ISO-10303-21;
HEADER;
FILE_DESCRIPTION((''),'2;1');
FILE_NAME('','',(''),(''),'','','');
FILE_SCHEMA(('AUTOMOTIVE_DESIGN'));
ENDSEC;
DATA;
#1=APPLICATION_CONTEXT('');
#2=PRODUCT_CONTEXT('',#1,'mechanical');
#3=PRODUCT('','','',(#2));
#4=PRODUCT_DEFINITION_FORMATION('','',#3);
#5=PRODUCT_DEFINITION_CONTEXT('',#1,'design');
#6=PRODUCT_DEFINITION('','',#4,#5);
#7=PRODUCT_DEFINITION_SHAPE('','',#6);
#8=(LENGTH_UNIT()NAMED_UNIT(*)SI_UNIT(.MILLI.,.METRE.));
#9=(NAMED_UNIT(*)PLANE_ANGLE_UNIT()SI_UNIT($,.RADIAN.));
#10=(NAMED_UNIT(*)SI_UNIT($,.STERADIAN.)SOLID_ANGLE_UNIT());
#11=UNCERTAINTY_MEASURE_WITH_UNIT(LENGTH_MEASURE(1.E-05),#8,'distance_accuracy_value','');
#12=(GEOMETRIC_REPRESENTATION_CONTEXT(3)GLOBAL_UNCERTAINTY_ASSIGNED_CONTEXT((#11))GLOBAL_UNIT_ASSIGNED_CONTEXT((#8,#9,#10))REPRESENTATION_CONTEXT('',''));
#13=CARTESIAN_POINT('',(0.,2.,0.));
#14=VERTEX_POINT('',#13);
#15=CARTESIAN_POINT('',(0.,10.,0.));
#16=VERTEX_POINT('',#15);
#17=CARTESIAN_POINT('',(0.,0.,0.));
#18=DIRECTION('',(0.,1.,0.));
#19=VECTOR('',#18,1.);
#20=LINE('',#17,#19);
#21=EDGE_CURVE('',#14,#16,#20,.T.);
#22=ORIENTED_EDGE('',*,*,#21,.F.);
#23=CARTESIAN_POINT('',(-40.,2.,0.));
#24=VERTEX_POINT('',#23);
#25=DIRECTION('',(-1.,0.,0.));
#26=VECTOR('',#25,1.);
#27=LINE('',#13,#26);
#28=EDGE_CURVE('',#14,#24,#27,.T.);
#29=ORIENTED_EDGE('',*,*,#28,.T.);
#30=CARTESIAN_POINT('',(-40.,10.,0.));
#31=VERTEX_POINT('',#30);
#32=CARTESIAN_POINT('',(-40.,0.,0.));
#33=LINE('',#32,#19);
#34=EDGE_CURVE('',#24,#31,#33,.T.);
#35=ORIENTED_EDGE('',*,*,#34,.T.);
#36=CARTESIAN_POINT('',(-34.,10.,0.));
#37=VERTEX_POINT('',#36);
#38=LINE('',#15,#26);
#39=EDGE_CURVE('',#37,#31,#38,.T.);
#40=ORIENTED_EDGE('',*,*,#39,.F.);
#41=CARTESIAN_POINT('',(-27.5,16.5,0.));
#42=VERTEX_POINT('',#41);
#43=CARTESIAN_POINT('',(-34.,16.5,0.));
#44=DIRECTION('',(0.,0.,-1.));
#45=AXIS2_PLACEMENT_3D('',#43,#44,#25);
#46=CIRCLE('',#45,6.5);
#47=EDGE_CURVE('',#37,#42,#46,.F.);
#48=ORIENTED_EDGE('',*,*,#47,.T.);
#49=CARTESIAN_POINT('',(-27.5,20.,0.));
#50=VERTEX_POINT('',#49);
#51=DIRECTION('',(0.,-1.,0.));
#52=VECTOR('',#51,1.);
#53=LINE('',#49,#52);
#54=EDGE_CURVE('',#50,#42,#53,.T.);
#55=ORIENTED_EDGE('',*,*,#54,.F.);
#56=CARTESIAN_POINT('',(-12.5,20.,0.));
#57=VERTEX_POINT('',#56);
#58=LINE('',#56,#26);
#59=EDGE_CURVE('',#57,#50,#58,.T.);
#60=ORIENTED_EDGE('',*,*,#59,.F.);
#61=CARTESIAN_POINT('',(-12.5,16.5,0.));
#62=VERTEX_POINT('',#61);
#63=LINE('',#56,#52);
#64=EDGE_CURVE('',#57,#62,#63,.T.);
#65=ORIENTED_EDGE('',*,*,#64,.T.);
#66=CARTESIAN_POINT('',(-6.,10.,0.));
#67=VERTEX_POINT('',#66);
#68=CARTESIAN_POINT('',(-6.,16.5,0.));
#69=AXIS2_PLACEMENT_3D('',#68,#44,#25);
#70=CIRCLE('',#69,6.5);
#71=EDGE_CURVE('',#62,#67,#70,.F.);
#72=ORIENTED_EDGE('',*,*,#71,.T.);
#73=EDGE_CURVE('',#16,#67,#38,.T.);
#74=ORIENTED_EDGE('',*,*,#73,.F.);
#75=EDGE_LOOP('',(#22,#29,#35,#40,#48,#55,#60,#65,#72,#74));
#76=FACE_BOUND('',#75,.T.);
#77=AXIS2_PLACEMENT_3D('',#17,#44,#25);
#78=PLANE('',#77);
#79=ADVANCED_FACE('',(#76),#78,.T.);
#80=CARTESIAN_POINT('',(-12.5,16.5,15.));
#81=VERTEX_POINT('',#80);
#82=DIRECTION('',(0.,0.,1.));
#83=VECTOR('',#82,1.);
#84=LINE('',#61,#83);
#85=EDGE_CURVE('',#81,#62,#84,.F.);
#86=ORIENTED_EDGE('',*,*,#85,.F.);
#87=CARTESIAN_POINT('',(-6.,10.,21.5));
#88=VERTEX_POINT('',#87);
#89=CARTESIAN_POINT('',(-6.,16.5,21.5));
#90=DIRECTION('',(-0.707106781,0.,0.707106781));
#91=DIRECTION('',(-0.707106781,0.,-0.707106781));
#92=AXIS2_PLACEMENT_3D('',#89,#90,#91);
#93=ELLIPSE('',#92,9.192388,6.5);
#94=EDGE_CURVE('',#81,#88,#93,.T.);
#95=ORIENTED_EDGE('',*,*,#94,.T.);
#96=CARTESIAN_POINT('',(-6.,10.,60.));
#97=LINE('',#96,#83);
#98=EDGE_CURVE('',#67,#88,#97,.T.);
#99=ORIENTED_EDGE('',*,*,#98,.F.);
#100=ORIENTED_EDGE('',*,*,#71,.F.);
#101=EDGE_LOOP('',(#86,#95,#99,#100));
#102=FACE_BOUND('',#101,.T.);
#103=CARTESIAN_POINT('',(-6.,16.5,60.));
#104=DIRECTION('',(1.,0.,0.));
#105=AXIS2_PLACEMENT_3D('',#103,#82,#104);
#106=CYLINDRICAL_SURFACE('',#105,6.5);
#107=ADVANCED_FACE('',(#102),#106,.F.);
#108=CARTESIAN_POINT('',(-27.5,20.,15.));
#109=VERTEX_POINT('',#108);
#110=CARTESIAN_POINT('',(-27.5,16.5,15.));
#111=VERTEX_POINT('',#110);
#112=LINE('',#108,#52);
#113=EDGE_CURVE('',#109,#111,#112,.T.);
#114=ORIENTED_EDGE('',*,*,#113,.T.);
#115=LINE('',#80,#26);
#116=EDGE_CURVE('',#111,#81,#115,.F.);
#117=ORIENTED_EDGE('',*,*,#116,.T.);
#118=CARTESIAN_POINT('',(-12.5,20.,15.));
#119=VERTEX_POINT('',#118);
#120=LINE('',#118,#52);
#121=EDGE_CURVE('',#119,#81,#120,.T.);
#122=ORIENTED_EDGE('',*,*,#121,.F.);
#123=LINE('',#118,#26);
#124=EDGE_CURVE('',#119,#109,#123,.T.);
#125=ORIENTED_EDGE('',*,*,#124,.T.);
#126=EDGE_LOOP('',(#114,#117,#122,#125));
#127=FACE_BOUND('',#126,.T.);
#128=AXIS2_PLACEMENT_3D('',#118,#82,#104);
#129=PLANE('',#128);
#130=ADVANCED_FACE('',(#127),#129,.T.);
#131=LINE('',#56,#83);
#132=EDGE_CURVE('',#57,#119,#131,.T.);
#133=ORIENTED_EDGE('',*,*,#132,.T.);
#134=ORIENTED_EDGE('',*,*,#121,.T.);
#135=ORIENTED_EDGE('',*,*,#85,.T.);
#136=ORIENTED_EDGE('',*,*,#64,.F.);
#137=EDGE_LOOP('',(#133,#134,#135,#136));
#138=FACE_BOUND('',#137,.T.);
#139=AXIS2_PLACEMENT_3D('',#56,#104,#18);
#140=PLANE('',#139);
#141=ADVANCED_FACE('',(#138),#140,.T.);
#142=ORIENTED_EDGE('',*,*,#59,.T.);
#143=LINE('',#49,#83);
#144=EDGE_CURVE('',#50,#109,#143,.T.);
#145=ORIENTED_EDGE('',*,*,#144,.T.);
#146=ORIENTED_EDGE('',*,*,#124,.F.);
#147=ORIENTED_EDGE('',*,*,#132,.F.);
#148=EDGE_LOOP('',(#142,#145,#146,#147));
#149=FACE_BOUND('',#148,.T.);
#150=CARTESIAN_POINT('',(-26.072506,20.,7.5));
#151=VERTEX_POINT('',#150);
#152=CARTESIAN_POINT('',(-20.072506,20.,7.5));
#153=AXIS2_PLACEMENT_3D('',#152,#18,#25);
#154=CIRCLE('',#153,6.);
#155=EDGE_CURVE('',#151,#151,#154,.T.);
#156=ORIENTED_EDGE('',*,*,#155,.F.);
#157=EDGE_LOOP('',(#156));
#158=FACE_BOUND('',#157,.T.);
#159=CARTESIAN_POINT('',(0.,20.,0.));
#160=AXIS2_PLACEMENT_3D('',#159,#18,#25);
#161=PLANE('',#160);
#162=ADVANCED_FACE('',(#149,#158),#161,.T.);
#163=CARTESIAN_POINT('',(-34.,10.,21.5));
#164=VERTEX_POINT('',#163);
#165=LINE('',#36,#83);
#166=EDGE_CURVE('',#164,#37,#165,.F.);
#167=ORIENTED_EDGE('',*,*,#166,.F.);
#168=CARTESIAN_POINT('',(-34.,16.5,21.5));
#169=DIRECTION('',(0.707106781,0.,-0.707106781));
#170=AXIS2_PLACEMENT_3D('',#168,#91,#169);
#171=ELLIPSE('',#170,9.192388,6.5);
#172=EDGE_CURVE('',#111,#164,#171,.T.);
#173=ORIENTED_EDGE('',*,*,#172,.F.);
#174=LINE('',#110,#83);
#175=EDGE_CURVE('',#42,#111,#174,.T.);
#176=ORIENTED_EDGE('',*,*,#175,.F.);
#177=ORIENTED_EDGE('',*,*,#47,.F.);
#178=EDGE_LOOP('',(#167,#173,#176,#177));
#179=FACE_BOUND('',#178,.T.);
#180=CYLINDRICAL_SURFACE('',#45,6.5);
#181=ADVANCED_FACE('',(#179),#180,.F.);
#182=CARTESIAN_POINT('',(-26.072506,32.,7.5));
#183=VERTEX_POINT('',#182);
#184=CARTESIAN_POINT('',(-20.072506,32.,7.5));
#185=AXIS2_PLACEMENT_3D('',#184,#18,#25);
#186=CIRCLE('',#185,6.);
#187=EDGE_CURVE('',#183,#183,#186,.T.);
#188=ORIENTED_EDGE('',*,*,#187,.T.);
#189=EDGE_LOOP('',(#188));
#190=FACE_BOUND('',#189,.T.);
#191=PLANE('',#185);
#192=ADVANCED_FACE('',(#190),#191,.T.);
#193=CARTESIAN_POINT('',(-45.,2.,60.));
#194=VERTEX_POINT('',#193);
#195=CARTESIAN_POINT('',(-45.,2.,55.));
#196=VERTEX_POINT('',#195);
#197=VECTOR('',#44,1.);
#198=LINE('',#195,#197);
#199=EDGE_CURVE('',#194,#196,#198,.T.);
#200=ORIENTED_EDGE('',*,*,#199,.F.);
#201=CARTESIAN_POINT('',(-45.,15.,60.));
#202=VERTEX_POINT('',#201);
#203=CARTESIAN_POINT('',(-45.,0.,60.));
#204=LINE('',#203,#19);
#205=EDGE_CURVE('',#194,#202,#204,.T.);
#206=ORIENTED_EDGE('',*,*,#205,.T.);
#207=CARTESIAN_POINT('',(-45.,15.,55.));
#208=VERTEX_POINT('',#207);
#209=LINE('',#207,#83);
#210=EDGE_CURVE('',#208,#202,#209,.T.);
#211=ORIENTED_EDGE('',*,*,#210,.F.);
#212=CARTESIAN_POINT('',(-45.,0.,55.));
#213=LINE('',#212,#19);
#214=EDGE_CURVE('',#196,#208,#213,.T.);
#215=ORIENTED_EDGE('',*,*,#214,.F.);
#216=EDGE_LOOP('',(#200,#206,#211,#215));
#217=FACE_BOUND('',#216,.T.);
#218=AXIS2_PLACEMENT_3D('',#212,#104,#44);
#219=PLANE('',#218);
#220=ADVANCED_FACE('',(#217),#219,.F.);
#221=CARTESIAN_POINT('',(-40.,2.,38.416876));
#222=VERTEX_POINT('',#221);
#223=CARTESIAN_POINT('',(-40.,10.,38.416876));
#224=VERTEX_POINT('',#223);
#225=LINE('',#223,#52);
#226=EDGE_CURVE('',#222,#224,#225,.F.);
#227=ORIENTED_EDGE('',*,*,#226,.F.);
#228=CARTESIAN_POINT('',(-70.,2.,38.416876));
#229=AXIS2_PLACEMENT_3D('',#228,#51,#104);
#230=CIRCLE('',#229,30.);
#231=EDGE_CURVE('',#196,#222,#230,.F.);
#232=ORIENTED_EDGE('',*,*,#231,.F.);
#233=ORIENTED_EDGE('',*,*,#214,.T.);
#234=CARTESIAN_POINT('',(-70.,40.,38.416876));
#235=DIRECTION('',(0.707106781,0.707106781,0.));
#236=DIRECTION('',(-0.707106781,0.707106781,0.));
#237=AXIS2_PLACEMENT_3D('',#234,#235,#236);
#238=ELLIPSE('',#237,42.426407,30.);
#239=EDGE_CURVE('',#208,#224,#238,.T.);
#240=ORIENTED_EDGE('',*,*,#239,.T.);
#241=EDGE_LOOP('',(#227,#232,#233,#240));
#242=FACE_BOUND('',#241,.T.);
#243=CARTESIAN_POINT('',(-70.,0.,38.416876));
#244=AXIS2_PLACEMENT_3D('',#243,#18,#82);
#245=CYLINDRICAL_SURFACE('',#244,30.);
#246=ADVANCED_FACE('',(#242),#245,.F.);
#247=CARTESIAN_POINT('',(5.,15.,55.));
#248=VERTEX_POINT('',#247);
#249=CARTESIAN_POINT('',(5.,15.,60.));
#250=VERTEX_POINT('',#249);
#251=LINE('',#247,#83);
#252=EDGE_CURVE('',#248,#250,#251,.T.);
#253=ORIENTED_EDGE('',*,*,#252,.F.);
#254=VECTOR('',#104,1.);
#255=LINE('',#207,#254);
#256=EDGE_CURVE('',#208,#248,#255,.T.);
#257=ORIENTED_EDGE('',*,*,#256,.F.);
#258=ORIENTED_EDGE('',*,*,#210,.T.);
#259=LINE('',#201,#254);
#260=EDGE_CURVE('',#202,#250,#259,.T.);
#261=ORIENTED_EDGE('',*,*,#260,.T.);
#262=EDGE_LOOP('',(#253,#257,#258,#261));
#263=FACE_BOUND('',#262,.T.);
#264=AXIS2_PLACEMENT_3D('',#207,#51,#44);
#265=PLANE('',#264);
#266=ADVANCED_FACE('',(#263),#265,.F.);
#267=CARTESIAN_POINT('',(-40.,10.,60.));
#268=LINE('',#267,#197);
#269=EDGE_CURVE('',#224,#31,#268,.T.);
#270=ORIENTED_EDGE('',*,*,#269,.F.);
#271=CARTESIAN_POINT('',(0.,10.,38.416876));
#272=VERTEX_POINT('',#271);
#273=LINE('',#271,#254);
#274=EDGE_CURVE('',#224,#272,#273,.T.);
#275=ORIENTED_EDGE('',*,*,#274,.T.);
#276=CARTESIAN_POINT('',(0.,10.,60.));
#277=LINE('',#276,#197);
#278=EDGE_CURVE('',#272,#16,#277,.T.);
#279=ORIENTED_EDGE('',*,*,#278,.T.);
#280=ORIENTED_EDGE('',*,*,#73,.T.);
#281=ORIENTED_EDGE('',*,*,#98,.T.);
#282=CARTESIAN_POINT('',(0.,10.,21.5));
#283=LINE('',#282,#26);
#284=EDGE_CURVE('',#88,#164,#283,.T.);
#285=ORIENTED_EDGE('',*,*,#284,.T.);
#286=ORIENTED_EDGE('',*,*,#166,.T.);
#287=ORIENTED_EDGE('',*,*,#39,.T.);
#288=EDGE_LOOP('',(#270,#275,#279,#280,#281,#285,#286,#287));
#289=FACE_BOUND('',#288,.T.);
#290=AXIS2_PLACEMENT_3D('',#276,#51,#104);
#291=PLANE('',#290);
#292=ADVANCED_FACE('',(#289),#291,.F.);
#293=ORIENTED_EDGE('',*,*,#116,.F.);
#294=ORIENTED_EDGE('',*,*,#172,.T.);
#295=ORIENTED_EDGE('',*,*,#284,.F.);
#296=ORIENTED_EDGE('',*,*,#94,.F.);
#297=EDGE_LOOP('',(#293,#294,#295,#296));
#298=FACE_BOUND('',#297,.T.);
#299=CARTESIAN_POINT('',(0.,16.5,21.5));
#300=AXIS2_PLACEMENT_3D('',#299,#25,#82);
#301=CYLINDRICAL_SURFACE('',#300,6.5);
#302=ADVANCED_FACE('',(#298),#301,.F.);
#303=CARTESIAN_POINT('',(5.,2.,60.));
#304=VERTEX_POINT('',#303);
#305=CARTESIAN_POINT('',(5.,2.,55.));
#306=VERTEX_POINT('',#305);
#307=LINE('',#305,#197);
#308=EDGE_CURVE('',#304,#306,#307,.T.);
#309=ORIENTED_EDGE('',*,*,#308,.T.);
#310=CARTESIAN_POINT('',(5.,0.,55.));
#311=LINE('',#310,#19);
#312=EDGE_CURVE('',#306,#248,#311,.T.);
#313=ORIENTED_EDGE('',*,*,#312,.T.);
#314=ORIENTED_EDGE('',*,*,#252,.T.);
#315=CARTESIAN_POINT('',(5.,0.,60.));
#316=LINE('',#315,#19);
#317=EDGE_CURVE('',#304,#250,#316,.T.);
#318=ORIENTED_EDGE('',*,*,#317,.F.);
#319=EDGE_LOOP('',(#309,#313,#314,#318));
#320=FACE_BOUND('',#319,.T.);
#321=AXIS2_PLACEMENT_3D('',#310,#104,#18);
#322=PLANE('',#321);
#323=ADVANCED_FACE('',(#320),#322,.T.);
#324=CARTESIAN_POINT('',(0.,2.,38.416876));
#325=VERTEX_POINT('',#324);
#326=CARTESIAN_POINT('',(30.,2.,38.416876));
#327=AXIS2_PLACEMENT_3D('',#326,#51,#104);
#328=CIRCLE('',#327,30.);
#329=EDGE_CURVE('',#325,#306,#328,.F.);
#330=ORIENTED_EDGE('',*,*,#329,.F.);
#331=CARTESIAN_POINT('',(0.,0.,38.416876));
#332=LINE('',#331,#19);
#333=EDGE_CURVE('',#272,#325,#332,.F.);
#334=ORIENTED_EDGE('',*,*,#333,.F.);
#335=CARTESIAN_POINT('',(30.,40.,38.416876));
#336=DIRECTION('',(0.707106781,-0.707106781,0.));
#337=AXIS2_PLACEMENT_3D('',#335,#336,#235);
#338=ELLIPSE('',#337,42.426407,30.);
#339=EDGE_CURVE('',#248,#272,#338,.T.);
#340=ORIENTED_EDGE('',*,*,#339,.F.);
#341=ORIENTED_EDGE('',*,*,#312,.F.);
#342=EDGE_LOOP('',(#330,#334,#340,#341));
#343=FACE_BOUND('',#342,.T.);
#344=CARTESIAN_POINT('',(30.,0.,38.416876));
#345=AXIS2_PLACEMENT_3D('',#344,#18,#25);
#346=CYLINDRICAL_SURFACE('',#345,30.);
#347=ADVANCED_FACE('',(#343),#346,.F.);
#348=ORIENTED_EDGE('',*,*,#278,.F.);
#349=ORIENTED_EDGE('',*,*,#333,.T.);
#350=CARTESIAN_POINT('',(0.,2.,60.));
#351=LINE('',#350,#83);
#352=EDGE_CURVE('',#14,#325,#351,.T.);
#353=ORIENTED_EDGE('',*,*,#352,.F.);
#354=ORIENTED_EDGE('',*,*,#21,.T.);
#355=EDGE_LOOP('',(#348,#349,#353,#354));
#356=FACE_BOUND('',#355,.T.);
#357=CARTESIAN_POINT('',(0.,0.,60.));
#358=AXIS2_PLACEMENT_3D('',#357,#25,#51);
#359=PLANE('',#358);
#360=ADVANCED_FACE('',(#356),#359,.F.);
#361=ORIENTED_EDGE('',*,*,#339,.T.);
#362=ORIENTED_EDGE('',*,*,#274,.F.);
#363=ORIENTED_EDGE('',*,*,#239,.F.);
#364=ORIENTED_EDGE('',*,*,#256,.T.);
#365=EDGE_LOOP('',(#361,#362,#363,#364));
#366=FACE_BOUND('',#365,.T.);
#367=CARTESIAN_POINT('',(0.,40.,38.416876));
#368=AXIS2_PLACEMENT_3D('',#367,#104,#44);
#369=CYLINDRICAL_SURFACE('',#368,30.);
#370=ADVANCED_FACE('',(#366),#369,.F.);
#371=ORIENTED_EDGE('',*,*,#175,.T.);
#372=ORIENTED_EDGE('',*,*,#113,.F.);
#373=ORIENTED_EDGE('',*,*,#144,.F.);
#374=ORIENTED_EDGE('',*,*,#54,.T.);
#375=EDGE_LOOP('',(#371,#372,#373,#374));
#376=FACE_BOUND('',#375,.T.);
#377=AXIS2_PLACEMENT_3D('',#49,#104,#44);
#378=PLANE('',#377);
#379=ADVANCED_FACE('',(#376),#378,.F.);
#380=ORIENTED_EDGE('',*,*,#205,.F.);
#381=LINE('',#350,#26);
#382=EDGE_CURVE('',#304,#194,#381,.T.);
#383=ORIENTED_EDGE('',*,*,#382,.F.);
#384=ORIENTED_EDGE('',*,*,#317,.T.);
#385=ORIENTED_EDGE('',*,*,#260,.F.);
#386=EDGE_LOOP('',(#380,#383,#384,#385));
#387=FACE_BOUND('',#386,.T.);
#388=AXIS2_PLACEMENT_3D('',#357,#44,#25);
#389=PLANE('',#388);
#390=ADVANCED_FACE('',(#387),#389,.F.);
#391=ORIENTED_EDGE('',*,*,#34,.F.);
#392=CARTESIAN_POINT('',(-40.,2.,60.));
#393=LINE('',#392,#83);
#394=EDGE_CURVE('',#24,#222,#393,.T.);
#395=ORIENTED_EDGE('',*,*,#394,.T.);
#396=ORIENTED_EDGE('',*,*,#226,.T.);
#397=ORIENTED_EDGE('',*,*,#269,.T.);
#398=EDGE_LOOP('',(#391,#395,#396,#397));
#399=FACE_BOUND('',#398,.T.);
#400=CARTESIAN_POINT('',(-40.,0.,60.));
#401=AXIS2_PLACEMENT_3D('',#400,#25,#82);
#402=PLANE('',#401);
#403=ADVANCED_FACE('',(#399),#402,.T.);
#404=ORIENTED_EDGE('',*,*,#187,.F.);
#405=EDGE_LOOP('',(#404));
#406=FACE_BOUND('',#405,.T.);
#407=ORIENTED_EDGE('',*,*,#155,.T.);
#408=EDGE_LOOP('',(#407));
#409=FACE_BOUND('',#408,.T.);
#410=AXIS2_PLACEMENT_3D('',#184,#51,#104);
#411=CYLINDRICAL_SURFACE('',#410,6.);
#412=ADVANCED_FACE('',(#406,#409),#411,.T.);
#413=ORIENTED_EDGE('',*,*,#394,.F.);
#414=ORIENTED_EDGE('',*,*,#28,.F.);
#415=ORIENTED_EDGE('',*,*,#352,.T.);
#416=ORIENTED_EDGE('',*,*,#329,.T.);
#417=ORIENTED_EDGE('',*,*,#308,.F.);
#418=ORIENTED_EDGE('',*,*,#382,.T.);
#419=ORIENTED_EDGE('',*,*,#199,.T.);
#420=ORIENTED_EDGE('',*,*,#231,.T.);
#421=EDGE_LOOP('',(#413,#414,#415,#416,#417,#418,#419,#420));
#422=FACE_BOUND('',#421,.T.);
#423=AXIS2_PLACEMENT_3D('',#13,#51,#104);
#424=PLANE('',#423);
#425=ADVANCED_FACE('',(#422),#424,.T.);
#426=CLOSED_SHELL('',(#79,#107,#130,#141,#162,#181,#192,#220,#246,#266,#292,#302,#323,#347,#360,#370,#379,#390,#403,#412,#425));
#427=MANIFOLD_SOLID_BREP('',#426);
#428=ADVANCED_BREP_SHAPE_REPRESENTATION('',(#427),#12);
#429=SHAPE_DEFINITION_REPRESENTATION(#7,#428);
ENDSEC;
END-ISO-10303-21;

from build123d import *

# Parameters (mm, degrees)
SKETCH5_W           = 40
SKETCH5_H           = 10
BOSS_EXTRUDE4_DEPTH = 60
SKETCH11_W          = 15
SKETCH11_H          = 15
BOSS_EXTRUDE6_DEPTH = 10
FILLET1_R           = 6.5
SKETCH14_W          = 50
SKETCH14_H          = 15
BOSS_EXTRUDE7_DEPTH = 5
FILLET2_R           = 30
SKETCH16_R          = 6
BOSS_EXTRUDE8_DEPTH = 12
SKETCH17_W          = 64.115547938
SKETCH17_H          = 89.863494167
CUT_EXTRUDE1_DEPTH  = 2


with BuildPart() as part:
    # Sketch5 → Boss-Extrude4 (new body)
    with BuildSketch(Plane.XY):
        with Locations((-20, 5)):
            Rectangle(SKETCH5_W, SKETCH5_H)
    extrude(amount=BOSS_EXTRUDE4_DEPTH)

    # Sketch11 → Boss-Extrude6 (add)
    with BuildSketch(Plane(origin=(0, 10, 0), x_dir=(1, 0, 0), z_dir=(0, 1, 0))):
        with Locations((-20, -7.5)):
            Rectangle(SKETCH11_W, SKETCH11_H)
    extrude(amount=BOSS_EXTRUDE6_DEPTH)

    # Fillet1
    fillet1_edges = [part.edges().sort_by_distance(p)[0] for p in [
        (-27.5, 10, 7.5),
        (-20, 10, 15),
        (-12.5, 10, 7.5),
    ]]
    fillet(fillet1_edges, radius=FILLET1_R)

    # Sketch14 → Boss-Extrude7 (add)
    with BuildSketch(Plane.XY.offset(60)):
        with Locations((-20, 7.5)):
            Rectangle(SKETCH14_W, SKETCH14_H)
    extrude(amount=-BOSS_EXTRUDE7_DEPTH)

    # Fillet2
    # the kernel refuses this fillet: 30 mm, written as the material it adds along each edge
    with BuildSketch(Plane(origin=(0, 10, 55), x_dir=(0, 0, -1), z_dir=(0, -1, 0))) as fillet2_piece_1:
        with BuildLine():
            CenterArc((16.583123952, 30), FILLET2_R, 236.442690238, 33.557309762)
            Line((0, 5), (-0.331662479, 4.5))
            ThreePointArc((-0.331662479, 4.5), (-0.6, 2.5), (-0.6, 0))
            Line((-0.6, 0), (0, -0.6))
            Line((0, -0.6), (16.583123952, -0.6))
            Line((16.583123952, -0.6), (16.583123952, 0))
        make_face()
    extrude(amount=10)
    with BuildSketch(Plane(origin=(-40, 10, 55), x_dir=(0, 1, 0), z_dir=(1, 0, 0))) as fillet2_piece_2:
        with BuildLine():
            CenterArc((30, -16.583123952), FILLET2_R, 146.442690238, 33.557309762)
            Line((0, -16.583123952), (-0.6, -16.583123952))
            Line((-0.6, -16.583123952), (-0.6, 0))
            Line((-0.6, 0), (0, 0.6))
            ThreePointArc((0, 0.6), (2.5, 0.6), (4.5, 0.331662479))
            Line((4.5, 0.331662479), (5, 0))
        make_face()
    extrude(amount=40)
    with BuildSketch(Plane(origin=(-40, 0, 55), x_dir=(-1, 0, 0), z_dir=(0, 1, 0))) as fillet2_piece_3:
        with BuildLine():
            CenterArc((30, -16.583123952), FILLET2_R, 146.442690238, 33.557309762)
            Line((0, -16.583123952), (-0.6, -16.583123952))
            Line((-0.6, -16.583123952), (-0.6, 0))
            Line((-0.6, 0), (0, 0.6))
            ThreePointArc((0, 0.6), (2.5, 0.6), (4.5, 0.331662479))
            Line((4.5, 0.331662479), (5, 0))
        make_face()
    extrude(amount=10)
    with BuildSketch(Plane(origin=(0, 51.457809879, 55), x_dir=(0, 0, -1), z_dir=(0, -1, 0))) as fillet2_piece_4a_section:
        with BuildLine():
            CenterArc((16.583123952, 30), FILLET2_R, 236.442690238, 33.557309762)
            Line((0, 5), (-0.331662479, 4.5))
            ThreePointArc((-0.331662479, 4.5), (-0.6, 2.5), (-0.6, 0))
            Line((-0.6, 0), (0, -0.6))
            Line((0, -0.6), (16.583123952, -0.6))
            Line((16.583123952, -0.6), (16.583123952, 0))
        make_face()
    fillet2_piece_4a = extrude(amount=51.457809879, mode=Mode.PRIVATE)
    fillet2_piece_4a = split(fillet2_piece_4a, bisect_by=Plane(origin=(1.065152115, 10, 50.172088022), z_dir=(0, 1, 0)), keep=Keep.TOP, mode=Mode.PRIVATE)
    fillet2_piece_4a = split(fillet2_piece_4a, bisect_by=Plane(origin=(1.065152115, 15, 50.172088022), z_dir=(0, -1, 0)), keep=Keep.TOP, mode=Mode.PRIVATE)
    with BuildSketch(Plane(origin=(-40, 10, 55), x_dir=(0, 1, 0), z_dir=(1, 0, 0))) as fillet2_piece_4b_section:
        with BuildLine():
            CenterArc((30, -16.583123952), FILLET2_R, 146.442690238, 33.557309762)
            Line((0, -16.583123952), (-0.6, -16.583123952))
            Line((-0.6, -16.583123952), (-0.6, 0))
            Line((-0.6, 0), (0, 0.6))
            ThreePointArc((0, 0.6), (2.5, 0.6), (4.5, 0.331662479))
            Line((4.5, 0.331662479), (5, 0))
        make_face()
    fillet2_piece_4b = extrude(amount=81.457809879, mode=Mode.PRIVATE)
    fillet2_piece_4b = split(fillet2_piece_4b, bisect_by=Plane(origin=(0, 11.065152115, 50.172088022), z_dir=(1, 0, 0)), keep=Keep.TOP, mode=Mode.PRIVATE)
    fillet2_piece_4b = split(fillet2_piece_4b, bisect_by=Plane(origin=(5, 11.065152115, 50.172088022), z_dir=(-1, 0, 0)), keep=Keep.TOP, mode=Mode.PRIVATE)
    fillet2_piece_4 = fillet2_piece_4a & fillet2_piece_4b
    add(fillet2_piece_4)
    with BuildSketch(Plane(origin=(-81.457809879, 10, 55), x_dir=(0, 1, 0), z_dir=(1, 0, 0))) as fillet2_piece_5a_section:
        with BuildLine():
            CenterArc((30, -16.583123952), FILLET2_R, 146.442690238, 33.557309762)
            Line((0, -16.583123952), (-0.6, -16.583123952))
            Line((-0.6, -16.583123952), (-0.6, 0))
            Line((-0.6, 0), (0, 0.6))
            ThreePointArc((0, 0.6), (2.5, 0.6), (4.5, 0.331662479))
            Line((4.5, 0.331662479), (5, 0))
        make_face()
    fillet2_piece_5a = extrude(amount=81.457809879, mode=Mode.PRIVATE)
    fillet2_piece_5a = split(fillet2_piece_5a, bisect_by=Plane(origin=(-45, 11.065152115, 50.172088022), z_dir=(1, 0, 0)), keep=Keep.TOP, mode=Mode.PRIVATE)
    fillet2_piece_5a = split(fillet2_piece_5a, bisect_by=Plane(origin=(-40, 11.065152115, 50.172088022), z_dir=(-1, 0, 0)), keep=Keep.TOP, mode=Mode.PRIVATE)
    with BuildSketch(Plane(origin=(-40, 0, 55), x_dir=(-1, 0, 0), z_dir=(0, 1, 0))) as fillet2_piece_5b_section:
        with BuildLine():
            CenterArc((30, -16.583123952), FILLET2_R, 146.442690238, 33.557309762)
            Line((0, -16.583123952), (-0.6, -16.583123952))
            Line((-0.6, -16.583123952), (-0.6, 0))
            Line((-0.6, 0), (0, 0.6))
            ThreePointArc((0, 0.6), (2.5, 0.6), (4.5, 0.331662479))
            Line((4.5, 0.331662479), (5, 0))
        make_face()
    fillet2_piece_5b = extrude(amount=51.457809879, mode=Mode.PRIVATE)
    fillet2_piece_5b = split(fillet2_piece_5b, bisect_by=Plane(origin=(-41.065152115, 15, 50.172088022), z_dir=(0, -1, 0)), keep=Keep.TOP, mode=Mode.PRIVATE)
    fillet2_piece_5b = split(fillet2_piece_5b, bisect_by=Plane(origin=(-41.065152115, 10, 50.172088022), z_dir=(0, 1, 0)), keep=Keep.TOP, mode=Mode.PRIVATE)
    fillet2_piece_5 = fillet2_piece_5a & fillet2_piece_5b
    add(fillet2_piece_5)

    # Sketch16 → Boss-Extrude8 (add)
    with BuildSketch(Plane(origin=(0, 20, 0), x_dir=(1, 0, 0), z_dir=(0, 1, 0))):
        with Locations(Location((-20.072505657, -7.5, 0), (0, 0, 180))):
            Circle(SKETCH16_R)
    extrude(amount=BOSS_EXTRUDE8_DEPTH)

    # Sketch17 → Cut-Extrude1 (cut)
    with BuildSketch(Plane(origin=(0, 0, 0), x_dir=(-1, 0, 0), z_dir=(0, -1, 0))):
        with Locations((20.527974447, -24.438192458)):
            Rectangle(SKETCH17_W, SKETCH17_H)
    extrude(amount=-CUT_EXTRUDE1_DEPTH, mode=Mode.SUBTRACT)


solid = part.part
